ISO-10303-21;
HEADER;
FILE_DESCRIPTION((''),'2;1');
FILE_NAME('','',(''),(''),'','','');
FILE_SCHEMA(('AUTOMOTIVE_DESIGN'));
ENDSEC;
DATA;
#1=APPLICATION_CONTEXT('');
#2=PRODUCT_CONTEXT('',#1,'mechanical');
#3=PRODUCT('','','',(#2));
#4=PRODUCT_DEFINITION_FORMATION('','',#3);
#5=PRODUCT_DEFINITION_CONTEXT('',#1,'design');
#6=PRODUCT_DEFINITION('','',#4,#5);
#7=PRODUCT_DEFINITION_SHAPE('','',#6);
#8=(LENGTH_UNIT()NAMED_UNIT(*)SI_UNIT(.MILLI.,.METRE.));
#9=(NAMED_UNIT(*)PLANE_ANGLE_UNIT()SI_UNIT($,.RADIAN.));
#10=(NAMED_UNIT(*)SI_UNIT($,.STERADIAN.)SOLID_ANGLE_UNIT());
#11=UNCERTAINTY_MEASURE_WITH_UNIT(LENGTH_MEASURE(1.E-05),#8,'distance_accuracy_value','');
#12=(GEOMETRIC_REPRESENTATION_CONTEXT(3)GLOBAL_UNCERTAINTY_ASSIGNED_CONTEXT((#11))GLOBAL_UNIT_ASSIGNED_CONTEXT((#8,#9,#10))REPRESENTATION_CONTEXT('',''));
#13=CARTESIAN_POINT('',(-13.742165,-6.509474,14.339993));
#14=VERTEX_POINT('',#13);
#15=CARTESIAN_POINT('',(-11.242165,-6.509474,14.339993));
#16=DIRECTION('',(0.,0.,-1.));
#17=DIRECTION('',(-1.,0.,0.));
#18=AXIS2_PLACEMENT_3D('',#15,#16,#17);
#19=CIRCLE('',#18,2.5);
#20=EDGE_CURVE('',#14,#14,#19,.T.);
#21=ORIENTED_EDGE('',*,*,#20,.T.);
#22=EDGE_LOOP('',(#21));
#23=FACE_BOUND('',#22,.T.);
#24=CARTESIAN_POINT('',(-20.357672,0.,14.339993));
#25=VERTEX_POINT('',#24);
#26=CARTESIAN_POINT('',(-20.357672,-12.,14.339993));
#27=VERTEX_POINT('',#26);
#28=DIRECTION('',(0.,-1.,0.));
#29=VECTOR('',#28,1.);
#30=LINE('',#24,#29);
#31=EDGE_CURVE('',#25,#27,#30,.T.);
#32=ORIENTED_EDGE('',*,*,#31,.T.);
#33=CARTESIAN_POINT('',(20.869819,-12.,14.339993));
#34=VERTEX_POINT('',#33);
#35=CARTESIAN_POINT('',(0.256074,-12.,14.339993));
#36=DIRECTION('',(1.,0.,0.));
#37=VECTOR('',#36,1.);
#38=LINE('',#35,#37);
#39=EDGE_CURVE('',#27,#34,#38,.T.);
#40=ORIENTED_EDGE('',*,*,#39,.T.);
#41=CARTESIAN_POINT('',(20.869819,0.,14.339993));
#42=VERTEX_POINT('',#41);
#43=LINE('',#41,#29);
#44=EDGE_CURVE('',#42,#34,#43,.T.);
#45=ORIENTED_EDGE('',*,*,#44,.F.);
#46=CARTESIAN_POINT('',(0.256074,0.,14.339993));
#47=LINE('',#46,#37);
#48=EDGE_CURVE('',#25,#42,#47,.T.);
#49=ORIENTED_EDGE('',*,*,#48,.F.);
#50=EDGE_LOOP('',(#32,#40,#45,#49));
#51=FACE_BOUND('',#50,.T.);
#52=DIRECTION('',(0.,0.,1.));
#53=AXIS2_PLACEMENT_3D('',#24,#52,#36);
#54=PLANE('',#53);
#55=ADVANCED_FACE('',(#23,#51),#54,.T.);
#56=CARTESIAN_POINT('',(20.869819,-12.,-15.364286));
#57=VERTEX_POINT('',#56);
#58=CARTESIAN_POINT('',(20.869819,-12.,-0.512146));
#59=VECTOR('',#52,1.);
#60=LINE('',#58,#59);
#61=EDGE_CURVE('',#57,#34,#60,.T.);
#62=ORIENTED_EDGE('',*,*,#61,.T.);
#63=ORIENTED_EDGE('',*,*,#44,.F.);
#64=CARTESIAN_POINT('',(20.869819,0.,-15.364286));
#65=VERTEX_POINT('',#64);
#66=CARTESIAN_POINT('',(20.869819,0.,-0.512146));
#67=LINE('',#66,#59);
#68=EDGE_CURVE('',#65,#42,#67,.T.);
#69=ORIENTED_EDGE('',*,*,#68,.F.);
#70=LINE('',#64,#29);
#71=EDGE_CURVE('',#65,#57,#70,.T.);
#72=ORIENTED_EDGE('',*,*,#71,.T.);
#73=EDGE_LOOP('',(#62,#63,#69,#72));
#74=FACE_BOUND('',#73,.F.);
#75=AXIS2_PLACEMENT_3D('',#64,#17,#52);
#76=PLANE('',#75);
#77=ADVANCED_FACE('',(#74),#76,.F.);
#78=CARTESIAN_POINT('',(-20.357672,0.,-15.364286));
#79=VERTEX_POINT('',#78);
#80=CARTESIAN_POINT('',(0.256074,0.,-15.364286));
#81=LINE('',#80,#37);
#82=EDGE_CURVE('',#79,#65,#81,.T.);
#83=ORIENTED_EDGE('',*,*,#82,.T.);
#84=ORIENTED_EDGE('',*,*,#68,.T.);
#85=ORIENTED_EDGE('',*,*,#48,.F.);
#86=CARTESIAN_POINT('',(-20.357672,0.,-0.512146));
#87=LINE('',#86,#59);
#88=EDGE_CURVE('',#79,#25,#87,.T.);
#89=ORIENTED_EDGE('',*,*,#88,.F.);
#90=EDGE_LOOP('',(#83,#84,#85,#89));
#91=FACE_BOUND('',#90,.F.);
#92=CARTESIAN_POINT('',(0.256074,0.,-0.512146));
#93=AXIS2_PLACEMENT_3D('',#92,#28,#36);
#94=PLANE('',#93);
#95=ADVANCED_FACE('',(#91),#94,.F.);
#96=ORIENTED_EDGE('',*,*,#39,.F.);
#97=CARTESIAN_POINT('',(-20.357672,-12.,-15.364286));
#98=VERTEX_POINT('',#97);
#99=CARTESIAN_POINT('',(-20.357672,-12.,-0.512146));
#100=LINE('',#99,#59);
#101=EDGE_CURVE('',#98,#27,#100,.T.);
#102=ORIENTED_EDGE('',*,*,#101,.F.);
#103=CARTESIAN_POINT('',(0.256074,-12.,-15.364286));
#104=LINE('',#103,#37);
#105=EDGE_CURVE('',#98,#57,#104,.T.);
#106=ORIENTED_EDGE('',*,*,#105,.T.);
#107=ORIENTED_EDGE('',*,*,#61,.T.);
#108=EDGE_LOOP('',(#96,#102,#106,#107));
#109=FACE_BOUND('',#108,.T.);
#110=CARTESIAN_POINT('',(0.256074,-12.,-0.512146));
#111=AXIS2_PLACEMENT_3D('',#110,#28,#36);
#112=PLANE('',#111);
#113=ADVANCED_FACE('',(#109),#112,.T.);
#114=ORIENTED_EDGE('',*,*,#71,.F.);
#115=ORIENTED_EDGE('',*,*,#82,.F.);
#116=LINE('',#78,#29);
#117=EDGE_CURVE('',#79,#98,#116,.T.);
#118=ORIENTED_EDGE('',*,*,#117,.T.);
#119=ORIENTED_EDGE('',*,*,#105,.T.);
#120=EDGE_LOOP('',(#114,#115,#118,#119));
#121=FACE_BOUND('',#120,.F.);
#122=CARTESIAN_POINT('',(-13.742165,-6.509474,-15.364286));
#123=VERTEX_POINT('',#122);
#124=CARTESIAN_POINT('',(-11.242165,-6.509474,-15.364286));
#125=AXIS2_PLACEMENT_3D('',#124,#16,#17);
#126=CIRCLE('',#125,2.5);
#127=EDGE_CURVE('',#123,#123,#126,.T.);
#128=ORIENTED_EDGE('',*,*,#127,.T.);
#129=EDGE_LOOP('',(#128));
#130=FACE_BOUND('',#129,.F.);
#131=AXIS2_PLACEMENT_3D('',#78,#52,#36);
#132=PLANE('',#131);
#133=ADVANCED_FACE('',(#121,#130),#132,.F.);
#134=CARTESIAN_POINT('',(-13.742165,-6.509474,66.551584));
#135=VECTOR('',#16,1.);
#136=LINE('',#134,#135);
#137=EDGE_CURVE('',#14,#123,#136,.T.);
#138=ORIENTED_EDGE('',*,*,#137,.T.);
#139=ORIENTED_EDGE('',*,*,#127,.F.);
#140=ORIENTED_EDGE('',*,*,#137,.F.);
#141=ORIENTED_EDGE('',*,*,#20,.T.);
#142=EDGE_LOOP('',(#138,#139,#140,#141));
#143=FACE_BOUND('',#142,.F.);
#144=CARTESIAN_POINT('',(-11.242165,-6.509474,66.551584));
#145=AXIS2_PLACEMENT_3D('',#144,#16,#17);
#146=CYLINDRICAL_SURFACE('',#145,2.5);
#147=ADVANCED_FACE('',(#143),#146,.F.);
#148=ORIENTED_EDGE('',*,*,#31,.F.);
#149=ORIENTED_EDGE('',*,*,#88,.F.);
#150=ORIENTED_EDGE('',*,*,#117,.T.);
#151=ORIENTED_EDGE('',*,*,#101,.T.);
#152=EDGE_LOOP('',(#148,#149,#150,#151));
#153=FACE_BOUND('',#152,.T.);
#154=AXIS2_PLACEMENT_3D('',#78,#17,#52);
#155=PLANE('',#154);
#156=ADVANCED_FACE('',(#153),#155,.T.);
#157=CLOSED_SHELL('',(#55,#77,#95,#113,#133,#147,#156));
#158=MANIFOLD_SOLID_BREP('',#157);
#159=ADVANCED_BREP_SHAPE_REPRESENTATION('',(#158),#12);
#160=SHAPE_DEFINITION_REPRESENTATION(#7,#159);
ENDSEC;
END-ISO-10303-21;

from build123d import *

# Parameters (mm, degrees)
F0_W     = 41.2274915725
F0_H     = 29.704278335
F2_DEPTH = 12
F5_D     = 5


# Not quite as in the source:
# - the program builds the solid bodies; features that only make, move or delete a surface that nothing else refers to are left out


with BuildPart() as f2:
    # F0 (on Front) → F2 (new body)
    with BuildSketch(Plane.XZ):
        with Locations((0.2560736611, -0.512146391)):
            Rectangle(F0_W, F0_H)
    extrude(amount=F2_DEPTH)

    # F5 (through all)
    with Locations(Plane.XY.offset(14.3399927765)):
        with Locations((-11.2421652302, -6.5094744787)):
            Hole(F5_D / 2)


solid = f2.part
